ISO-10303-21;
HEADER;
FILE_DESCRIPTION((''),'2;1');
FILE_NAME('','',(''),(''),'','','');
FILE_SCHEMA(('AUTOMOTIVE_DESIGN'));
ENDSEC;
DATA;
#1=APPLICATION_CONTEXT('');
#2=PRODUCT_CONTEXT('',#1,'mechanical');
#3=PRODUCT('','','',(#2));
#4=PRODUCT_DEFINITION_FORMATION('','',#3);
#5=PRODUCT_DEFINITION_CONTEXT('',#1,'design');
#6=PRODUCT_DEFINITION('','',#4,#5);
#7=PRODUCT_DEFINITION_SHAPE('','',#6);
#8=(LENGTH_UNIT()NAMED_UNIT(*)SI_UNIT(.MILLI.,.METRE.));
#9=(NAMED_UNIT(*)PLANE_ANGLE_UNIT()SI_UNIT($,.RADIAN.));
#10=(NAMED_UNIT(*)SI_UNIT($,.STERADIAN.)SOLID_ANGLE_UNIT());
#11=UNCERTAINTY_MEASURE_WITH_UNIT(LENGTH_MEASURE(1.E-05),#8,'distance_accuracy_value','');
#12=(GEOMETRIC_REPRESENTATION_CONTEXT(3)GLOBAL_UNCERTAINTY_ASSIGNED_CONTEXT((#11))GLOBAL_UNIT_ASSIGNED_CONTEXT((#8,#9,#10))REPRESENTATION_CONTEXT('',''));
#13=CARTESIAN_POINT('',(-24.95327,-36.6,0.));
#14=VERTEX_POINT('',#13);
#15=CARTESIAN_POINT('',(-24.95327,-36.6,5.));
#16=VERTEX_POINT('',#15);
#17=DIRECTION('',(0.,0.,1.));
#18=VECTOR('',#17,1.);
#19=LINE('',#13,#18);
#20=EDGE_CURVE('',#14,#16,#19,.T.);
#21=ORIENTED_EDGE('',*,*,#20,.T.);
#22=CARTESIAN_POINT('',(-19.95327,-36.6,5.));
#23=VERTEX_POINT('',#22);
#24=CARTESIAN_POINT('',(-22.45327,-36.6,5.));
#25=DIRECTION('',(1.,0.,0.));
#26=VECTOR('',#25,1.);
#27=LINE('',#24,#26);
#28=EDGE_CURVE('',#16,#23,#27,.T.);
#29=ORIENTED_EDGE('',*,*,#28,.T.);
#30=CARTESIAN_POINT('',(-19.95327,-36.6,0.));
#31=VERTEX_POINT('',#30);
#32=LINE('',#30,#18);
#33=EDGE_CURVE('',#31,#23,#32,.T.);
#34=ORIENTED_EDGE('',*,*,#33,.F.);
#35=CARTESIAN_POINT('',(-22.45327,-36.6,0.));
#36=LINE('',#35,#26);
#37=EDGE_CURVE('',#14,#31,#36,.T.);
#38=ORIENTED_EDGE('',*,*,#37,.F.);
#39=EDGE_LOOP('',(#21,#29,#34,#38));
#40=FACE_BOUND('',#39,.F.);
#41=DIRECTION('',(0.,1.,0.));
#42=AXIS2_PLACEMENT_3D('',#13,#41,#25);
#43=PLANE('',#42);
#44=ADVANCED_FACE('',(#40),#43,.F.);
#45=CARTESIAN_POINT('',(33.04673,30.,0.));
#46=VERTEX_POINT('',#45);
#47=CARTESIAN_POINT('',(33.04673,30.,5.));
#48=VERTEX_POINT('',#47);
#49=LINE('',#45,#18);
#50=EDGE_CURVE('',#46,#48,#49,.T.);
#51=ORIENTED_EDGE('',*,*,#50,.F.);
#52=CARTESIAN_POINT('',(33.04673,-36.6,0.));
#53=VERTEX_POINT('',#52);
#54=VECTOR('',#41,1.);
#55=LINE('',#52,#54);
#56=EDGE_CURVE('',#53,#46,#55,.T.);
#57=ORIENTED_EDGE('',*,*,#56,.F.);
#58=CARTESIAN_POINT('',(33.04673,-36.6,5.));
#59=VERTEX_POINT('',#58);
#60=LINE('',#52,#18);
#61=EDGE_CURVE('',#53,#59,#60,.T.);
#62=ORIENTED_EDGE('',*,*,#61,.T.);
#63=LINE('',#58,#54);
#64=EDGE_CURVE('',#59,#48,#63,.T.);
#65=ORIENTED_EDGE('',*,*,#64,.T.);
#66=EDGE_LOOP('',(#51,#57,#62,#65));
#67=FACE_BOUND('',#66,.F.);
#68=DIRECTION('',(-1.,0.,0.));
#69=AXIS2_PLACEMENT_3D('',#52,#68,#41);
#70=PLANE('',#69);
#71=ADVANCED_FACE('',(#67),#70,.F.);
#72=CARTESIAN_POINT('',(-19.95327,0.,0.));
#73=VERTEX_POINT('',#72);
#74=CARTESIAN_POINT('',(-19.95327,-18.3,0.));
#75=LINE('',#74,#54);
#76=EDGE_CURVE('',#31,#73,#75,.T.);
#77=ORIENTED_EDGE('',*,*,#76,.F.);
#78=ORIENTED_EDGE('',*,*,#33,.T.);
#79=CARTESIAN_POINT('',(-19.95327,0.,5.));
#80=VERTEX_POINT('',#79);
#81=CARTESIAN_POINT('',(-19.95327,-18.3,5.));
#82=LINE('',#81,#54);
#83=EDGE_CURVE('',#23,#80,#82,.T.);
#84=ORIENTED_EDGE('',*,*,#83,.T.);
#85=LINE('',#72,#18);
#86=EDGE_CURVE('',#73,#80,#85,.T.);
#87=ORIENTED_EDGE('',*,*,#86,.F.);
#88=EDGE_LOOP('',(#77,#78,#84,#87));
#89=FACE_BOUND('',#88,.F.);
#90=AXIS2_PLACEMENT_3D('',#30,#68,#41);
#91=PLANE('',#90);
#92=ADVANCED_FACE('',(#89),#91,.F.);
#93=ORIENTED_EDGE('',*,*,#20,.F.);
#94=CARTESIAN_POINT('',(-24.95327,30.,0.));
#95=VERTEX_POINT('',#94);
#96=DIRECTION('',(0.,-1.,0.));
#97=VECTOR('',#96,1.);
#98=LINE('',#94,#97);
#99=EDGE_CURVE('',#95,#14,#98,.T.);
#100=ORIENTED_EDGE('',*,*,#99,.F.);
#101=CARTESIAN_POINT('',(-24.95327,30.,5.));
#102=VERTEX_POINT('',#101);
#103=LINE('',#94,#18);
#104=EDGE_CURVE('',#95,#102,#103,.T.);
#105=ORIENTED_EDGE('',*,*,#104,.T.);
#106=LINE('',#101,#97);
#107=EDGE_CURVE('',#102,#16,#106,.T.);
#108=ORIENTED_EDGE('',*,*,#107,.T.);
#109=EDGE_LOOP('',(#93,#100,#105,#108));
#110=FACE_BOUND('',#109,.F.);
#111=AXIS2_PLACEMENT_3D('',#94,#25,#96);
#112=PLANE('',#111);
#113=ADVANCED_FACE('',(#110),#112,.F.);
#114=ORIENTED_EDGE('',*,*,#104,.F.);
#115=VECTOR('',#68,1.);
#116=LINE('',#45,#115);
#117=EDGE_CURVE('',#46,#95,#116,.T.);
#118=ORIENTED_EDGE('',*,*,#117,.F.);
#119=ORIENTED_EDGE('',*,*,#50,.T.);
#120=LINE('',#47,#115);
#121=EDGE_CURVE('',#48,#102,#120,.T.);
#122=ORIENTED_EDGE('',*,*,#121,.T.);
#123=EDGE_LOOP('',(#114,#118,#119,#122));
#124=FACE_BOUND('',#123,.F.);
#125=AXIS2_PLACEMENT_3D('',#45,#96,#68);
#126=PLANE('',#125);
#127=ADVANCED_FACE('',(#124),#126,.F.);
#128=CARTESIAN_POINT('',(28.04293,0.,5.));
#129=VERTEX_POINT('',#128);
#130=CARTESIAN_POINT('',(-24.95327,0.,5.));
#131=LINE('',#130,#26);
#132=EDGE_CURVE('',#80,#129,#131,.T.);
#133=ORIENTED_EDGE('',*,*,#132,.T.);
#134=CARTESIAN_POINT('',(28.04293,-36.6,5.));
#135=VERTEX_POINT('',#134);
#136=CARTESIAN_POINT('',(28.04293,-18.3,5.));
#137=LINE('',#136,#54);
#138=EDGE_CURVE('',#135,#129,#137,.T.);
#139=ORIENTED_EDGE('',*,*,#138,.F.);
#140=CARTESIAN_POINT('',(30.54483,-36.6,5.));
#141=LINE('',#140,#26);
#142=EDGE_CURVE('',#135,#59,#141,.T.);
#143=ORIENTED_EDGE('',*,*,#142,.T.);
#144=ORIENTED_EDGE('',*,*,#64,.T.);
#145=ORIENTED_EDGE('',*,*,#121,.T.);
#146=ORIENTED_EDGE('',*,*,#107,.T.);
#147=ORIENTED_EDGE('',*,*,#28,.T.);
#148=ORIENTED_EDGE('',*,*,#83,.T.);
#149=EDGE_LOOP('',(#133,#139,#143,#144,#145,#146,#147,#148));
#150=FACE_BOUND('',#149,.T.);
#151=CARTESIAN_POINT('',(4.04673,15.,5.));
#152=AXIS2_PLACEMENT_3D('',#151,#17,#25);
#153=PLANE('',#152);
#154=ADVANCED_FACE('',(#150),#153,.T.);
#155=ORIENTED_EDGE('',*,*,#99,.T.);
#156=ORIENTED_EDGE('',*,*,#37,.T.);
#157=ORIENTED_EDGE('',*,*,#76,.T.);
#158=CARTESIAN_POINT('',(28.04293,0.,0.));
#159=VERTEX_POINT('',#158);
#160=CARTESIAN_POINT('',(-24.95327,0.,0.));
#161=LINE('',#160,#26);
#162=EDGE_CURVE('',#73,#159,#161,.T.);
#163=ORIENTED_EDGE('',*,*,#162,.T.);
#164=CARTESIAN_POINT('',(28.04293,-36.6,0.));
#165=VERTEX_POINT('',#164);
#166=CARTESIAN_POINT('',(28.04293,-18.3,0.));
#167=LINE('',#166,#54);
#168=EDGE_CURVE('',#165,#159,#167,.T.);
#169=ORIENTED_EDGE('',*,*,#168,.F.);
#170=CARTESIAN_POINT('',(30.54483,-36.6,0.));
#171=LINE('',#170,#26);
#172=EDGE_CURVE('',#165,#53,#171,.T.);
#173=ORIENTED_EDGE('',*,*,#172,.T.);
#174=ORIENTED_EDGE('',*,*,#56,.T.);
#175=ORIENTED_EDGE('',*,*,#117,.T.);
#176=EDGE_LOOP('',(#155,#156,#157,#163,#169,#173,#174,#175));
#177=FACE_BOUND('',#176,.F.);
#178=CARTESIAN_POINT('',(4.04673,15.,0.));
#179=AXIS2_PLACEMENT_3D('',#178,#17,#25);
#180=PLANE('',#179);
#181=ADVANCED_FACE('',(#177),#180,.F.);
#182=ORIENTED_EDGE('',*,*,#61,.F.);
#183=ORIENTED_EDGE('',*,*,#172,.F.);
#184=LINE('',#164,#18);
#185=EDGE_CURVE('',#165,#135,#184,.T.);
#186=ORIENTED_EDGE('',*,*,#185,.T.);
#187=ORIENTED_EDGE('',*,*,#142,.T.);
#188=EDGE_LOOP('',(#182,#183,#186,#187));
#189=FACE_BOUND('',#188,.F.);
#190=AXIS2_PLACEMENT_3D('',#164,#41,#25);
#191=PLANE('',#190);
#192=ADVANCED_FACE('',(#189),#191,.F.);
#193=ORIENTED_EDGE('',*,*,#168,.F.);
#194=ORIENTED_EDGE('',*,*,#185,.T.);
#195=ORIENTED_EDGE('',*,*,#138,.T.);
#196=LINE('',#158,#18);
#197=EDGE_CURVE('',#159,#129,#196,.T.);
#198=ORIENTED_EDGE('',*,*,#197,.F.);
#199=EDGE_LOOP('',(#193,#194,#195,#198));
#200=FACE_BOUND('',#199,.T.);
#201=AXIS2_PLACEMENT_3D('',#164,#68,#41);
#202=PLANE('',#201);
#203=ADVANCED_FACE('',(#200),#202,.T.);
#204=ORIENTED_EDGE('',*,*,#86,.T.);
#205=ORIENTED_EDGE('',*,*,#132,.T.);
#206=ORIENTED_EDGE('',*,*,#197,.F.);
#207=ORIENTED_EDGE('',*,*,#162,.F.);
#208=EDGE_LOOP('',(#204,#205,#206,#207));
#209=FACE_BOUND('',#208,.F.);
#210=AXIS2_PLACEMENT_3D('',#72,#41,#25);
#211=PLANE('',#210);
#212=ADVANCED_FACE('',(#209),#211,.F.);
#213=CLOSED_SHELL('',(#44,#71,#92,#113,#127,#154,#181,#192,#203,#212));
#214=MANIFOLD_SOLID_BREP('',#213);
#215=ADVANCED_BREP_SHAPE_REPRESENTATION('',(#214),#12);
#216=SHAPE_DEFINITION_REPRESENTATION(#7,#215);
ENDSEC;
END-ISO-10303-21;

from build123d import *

# Parameters (mm, degrees)
F0_W     = 5
F0_H     = 36.6
F0_W_2   = 5.0038
F1_DEPTH = 5


# Not quite as in the source:
# - the program builds the solid bodies; features that only make, move or delete a surface that nothing else refers to are left out


with BuildPart() as f1:
    # F0 (on Top) → F1 (new body)
    with BuildSketch(Plane.XY):
        Polygon((33.0467298965, 30), (-24.9532701035, 30), (-24.9532701035, 0), (-19.9532701035, 0), (28.0429298965, 0), (33.0467298965, 0), align=None)
        with Locations((-22.4532701035, -18.3)):
            Rectangle(F0_W, F0_H)
        with Locations((30.5448298965, -18.3)):
            Rectangle(F0_W_2, F0_H)
    extrude(amount=F1_DEPTH)


solid = f1.part
